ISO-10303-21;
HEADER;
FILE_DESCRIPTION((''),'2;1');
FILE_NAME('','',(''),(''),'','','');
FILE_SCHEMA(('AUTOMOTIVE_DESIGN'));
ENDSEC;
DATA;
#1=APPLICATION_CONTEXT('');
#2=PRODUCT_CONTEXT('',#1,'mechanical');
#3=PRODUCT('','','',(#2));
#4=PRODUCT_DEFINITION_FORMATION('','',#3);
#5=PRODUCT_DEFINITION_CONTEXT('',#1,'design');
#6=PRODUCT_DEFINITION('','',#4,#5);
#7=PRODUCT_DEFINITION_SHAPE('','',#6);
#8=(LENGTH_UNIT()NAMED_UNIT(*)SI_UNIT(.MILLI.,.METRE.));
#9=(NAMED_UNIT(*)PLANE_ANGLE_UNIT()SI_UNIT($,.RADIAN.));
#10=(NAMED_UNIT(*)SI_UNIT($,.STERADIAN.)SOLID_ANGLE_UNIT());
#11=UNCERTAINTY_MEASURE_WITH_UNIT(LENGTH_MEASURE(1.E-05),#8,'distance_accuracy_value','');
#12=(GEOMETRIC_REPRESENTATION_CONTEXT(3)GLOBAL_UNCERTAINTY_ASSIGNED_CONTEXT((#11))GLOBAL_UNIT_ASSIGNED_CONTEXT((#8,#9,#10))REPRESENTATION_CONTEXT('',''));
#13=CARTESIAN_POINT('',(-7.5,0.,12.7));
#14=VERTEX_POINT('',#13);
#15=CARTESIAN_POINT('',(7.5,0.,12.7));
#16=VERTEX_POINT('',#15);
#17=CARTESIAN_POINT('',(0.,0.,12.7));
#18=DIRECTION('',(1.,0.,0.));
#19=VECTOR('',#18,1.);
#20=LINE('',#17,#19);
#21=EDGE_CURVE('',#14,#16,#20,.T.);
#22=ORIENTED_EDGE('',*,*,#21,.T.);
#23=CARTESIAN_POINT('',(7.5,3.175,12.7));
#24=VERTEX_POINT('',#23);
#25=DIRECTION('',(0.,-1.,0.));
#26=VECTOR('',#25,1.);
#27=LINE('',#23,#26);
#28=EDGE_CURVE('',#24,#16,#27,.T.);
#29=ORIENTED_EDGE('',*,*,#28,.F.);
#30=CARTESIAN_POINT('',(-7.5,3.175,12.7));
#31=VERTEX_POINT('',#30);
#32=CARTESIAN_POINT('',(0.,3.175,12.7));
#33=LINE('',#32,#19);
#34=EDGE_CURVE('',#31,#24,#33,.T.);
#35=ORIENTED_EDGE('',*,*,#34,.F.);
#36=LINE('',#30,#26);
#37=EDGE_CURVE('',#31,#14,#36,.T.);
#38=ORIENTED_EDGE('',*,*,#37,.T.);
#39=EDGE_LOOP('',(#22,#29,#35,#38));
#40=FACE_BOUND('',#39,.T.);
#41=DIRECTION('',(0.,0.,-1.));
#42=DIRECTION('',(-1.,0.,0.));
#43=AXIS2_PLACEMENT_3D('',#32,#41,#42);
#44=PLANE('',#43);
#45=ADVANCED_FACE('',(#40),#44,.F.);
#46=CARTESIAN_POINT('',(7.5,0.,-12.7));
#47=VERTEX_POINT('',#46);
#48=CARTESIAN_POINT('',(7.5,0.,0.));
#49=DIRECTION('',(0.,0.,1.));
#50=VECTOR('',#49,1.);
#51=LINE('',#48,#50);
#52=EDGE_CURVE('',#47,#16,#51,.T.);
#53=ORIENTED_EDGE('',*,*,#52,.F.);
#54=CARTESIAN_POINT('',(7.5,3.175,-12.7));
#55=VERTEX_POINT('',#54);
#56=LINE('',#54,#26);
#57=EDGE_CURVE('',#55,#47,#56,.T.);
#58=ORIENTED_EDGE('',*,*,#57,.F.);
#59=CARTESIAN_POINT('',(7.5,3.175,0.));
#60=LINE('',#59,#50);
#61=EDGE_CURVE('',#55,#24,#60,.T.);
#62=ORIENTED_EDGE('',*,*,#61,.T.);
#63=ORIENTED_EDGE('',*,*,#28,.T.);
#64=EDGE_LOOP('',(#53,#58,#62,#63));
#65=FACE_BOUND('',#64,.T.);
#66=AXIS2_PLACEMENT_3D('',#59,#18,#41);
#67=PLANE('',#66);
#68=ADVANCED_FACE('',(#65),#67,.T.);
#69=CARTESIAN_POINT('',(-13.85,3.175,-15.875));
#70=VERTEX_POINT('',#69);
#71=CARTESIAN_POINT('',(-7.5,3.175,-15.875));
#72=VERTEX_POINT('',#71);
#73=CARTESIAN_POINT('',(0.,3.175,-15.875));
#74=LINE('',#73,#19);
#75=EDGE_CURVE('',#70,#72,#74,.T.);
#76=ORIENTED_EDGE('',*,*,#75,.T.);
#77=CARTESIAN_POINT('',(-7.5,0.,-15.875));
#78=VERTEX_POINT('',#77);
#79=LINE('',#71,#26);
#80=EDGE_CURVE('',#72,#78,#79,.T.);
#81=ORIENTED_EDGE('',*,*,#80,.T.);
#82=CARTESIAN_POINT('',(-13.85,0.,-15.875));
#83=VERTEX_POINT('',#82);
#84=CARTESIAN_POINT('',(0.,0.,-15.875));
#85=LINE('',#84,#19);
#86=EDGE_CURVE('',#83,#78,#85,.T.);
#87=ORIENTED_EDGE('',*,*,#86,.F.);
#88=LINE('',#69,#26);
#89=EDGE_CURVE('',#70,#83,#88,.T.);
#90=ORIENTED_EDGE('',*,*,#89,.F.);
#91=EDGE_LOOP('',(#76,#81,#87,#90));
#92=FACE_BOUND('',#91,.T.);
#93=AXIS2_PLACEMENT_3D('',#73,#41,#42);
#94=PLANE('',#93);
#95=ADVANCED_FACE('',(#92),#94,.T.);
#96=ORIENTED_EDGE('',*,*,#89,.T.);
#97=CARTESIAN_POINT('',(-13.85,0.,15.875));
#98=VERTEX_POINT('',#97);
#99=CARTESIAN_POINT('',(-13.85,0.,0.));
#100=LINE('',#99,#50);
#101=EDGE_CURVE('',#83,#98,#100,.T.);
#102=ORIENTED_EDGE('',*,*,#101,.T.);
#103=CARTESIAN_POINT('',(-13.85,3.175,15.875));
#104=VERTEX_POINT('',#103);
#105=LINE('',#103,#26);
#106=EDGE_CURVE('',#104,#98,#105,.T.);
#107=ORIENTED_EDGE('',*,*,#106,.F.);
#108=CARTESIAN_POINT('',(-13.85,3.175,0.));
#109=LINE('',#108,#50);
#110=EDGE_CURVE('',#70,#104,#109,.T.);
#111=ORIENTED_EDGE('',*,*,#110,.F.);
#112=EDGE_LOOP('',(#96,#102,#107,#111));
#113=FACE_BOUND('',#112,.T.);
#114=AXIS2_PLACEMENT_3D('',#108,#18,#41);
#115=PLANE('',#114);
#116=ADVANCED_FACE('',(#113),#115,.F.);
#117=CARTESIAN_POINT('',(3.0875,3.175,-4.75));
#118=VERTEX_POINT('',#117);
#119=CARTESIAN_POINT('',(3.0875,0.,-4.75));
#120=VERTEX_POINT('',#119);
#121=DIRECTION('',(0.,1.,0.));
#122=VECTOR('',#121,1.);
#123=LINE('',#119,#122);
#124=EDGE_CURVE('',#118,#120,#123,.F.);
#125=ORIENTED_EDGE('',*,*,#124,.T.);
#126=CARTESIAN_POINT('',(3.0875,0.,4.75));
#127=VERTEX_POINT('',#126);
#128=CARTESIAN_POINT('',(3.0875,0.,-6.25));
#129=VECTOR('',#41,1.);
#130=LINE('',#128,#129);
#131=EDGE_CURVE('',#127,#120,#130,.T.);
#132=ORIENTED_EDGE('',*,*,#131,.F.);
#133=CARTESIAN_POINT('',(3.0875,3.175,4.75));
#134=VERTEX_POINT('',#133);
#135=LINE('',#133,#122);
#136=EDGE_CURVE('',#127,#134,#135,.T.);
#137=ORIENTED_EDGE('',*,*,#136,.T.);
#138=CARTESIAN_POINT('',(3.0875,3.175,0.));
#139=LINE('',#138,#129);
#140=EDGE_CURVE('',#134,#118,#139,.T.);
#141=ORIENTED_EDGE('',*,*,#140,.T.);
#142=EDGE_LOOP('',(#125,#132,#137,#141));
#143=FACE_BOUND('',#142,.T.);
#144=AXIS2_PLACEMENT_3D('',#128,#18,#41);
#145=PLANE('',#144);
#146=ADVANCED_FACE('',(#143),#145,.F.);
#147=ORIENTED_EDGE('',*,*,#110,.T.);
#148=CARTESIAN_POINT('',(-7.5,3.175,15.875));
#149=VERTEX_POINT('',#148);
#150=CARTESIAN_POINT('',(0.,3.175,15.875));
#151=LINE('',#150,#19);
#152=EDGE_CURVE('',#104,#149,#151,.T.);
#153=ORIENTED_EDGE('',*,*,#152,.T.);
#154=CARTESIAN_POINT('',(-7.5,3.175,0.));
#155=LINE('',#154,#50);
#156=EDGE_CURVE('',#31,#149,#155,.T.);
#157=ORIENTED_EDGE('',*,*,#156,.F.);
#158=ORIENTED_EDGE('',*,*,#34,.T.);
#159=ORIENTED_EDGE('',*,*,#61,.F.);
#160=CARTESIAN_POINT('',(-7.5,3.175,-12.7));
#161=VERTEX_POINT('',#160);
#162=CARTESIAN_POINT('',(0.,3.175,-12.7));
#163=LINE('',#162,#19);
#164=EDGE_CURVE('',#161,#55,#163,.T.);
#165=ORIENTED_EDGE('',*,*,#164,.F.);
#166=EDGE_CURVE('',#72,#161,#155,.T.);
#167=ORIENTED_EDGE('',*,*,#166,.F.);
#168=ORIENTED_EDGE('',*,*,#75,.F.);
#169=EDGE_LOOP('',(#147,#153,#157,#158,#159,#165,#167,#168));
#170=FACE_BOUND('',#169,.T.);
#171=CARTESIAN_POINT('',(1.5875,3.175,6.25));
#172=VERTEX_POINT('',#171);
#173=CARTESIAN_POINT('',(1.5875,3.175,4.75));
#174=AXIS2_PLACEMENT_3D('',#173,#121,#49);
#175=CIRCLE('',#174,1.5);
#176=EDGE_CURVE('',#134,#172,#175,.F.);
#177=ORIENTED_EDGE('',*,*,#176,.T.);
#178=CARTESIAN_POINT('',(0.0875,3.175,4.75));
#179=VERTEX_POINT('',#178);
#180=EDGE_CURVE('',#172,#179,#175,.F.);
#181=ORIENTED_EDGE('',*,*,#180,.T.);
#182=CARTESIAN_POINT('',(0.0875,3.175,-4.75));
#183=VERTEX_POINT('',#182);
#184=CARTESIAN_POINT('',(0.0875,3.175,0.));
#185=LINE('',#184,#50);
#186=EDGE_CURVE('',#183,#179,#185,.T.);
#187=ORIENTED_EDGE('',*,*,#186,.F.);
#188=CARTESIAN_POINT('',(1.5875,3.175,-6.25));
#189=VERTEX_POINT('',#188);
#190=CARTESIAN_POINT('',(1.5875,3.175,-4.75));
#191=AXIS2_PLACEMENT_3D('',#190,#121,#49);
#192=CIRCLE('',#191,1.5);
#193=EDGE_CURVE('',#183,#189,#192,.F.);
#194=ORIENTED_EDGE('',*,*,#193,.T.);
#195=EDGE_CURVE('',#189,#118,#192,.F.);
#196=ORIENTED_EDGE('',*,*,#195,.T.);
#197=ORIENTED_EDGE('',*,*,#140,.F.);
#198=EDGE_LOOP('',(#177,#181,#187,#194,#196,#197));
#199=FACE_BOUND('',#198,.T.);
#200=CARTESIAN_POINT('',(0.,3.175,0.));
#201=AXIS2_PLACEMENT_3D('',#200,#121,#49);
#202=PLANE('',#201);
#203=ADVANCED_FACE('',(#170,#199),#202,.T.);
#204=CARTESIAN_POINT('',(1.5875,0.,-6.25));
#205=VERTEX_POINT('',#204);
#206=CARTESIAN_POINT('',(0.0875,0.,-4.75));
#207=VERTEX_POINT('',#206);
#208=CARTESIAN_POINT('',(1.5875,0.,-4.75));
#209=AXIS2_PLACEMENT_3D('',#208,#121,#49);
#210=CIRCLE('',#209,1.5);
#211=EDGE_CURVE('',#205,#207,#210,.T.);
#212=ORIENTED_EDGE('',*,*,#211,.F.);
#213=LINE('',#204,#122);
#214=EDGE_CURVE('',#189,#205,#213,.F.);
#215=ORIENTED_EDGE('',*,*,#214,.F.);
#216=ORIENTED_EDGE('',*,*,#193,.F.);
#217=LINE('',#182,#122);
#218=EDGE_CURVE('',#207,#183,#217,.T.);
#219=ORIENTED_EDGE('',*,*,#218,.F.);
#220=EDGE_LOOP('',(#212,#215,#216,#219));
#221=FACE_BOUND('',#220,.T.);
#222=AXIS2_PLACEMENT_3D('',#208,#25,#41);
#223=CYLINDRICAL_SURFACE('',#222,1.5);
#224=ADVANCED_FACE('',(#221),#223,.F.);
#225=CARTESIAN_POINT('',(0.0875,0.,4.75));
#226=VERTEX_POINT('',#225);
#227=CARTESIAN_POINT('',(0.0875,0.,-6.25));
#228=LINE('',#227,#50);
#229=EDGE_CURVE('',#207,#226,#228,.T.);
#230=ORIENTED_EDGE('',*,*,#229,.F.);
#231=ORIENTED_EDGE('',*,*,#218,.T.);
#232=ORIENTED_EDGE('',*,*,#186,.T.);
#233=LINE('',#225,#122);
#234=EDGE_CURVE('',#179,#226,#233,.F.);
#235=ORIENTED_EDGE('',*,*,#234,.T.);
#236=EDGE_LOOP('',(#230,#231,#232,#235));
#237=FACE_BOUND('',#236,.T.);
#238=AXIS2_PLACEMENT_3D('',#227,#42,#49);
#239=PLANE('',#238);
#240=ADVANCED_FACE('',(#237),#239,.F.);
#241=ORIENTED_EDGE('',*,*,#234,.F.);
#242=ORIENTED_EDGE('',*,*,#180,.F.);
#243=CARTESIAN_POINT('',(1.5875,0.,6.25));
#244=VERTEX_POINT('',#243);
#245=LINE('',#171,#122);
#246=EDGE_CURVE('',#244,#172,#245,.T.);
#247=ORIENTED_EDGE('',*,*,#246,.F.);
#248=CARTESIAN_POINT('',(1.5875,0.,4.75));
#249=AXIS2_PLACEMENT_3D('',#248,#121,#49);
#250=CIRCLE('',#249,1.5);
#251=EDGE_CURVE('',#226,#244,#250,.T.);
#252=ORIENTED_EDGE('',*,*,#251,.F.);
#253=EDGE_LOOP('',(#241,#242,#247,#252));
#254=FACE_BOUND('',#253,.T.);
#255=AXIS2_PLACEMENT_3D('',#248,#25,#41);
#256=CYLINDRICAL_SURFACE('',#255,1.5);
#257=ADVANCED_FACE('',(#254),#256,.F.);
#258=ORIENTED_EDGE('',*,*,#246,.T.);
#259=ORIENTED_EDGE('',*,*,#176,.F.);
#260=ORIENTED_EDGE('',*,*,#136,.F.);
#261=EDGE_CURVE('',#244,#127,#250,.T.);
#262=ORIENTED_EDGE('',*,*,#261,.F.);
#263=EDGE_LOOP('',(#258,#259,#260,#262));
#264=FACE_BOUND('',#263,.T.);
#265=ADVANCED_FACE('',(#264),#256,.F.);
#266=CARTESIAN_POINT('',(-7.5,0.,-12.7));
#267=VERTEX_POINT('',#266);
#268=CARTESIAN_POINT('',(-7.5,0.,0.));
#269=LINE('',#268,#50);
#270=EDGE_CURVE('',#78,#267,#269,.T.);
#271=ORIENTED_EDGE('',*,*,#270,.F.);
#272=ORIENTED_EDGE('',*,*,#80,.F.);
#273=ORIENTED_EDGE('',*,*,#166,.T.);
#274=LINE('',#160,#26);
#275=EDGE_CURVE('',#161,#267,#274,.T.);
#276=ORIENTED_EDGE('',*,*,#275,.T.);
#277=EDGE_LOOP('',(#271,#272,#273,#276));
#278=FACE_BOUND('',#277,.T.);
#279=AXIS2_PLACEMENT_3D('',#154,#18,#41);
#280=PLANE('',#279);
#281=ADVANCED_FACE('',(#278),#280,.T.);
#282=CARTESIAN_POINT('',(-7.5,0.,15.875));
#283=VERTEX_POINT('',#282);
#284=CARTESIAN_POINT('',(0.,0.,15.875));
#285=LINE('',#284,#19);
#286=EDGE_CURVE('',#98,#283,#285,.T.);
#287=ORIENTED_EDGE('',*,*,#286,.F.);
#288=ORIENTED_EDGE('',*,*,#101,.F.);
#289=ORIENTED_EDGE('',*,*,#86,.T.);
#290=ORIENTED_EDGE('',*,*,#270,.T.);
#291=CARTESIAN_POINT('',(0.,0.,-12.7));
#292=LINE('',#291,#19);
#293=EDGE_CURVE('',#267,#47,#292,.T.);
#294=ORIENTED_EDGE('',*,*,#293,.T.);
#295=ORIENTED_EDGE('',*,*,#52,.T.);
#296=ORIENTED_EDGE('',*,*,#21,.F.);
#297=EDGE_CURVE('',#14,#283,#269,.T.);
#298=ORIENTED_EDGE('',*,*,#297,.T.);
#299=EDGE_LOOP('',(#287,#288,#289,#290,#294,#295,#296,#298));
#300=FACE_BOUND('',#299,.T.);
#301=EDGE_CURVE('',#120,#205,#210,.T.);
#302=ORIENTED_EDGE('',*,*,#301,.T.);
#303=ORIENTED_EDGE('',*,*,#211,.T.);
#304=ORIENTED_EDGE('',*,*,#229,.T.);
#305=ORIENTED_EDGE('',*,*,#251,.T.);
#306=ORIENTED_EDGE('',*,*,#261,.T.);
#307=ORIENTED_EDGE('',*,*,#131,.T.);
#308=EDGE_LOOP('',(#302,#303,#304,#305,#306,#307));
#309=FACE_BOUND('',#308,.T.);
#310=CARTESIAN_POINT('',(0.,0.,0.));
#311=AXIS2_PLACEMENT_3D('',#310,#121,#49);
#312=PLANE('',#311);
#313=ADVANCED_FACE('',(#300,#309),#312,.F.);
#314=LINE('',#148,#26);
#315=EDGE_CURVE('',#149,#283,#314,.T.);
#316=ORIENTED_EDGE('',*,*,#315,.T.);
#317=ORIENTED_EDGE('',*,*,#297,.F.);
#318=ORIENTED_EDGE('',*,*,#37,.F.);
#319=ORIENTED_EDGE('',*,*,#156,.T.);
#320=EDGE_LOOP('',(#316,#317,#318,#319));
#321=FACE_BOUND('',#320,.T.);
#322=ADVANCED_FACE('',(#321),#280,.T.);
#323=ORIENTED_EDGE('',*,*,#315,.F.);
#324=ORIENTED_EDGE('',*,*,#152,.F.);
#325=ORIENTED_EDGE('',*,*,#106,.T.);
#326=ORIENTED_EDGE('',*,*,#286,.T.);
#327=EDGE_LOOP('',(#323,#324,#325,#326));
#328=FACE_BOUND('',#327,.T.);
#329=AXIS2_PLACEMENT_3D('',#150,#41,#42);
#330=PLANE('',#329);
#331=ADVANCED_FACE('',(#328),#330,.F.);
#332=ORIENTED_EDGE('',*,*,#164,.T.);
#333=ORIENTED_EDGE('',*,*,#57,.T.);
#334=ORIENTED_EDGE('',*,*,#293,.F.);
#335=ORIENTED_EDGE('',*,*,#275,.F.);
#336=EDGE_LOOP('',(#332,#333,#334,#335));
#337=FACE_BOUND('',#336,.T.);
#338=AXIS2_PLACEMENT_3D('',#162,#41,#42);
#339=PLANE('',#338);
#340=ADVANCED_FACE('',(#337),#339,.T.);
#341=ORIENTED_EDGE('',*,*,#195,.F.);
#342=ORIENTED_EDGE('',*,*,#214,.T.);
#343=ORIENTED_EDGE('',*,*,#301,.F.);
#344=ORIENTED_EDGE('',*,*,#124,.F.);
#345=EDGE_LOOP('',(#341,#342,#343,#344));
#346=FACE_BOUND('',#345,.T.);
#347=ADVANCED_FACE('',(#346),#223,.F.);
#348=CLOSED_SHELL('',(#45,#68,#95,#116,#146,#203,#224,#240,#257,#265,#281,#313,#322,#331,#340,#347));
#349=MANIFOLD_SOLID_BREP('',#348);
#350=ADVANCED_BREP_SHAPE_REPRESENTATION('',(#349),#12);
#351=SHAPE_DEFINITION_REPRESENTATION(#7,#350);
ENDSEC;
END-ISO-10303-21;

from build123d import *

# Parameters (mm, degrees)
SKETCH1_W               = 15
SKETCH1_H               = 25.4
BOSS_EXTRUDE1_DEPTH     = 3.175
CUT_EXTRUDE1_DEPTH      = 22.305369042
CUT_EXTRUDE1_DEPTH_BACK = 22.305369042
SKETCH2_W               = 3
SKETCH2_H               = 12.5
FILLET1_R               = 1.5


with BuildPart() as part:
    # Sketch1 → Boss-Extrude1 (new body)
    with BuildSketch(Plane(origin=(0, 0, 0), x_dir=(1, 0, 0), z_dir=(0, 1, 0))):
        Polygon((-7.5, -12.7), (-7.5, 12.7), (-7.5, 15.875), (-13.85, 15.875), (-13.85, -15.875), (-7.5, -15.875), align=None)
        Rectangle(SKETCH1_W, SKETCH1_H)
    extrude(amount=BOSS_EXTRUDE1_DEPTH)

    # Sketch2 → Cut-Extrude1 (cut, two sides: drawn at the far end of the back side and taken through both)
    with BuildSketch(Plane(origin=(0, 3.175, 0), x_dir=(1, 0, 0), z_dir=(0, 1, 0)).offset(-CUT_EXTRUDE1_DEPTH_BACK)):
        with Locations((1.5875, 0)):
            Rectangle(SKETCH2_W, SKETCH2_H)
    extrude(amount=CUT_EXTRUDE1_DEPTH + CUT_EXTRUDE1_DEPTH_BACK, mode=Mode.SUBTRACT)

    # Fillet1
    fillet1_edges = [part.edges().sort_by_distance(p)[0] for p in [
        (3.0875, 1.5875, -6.25),
        (3.0875, 1.5875, 6.25),
        (0.0875, 1.5875, 6.25),
        (0.0875, 1.5875, -6.25),
    ]]
    fillet(fillet1_edges, radius=FILLET1_R - 0.0001)  # a hair under: the kernel refuses the full size


solid = part.part
